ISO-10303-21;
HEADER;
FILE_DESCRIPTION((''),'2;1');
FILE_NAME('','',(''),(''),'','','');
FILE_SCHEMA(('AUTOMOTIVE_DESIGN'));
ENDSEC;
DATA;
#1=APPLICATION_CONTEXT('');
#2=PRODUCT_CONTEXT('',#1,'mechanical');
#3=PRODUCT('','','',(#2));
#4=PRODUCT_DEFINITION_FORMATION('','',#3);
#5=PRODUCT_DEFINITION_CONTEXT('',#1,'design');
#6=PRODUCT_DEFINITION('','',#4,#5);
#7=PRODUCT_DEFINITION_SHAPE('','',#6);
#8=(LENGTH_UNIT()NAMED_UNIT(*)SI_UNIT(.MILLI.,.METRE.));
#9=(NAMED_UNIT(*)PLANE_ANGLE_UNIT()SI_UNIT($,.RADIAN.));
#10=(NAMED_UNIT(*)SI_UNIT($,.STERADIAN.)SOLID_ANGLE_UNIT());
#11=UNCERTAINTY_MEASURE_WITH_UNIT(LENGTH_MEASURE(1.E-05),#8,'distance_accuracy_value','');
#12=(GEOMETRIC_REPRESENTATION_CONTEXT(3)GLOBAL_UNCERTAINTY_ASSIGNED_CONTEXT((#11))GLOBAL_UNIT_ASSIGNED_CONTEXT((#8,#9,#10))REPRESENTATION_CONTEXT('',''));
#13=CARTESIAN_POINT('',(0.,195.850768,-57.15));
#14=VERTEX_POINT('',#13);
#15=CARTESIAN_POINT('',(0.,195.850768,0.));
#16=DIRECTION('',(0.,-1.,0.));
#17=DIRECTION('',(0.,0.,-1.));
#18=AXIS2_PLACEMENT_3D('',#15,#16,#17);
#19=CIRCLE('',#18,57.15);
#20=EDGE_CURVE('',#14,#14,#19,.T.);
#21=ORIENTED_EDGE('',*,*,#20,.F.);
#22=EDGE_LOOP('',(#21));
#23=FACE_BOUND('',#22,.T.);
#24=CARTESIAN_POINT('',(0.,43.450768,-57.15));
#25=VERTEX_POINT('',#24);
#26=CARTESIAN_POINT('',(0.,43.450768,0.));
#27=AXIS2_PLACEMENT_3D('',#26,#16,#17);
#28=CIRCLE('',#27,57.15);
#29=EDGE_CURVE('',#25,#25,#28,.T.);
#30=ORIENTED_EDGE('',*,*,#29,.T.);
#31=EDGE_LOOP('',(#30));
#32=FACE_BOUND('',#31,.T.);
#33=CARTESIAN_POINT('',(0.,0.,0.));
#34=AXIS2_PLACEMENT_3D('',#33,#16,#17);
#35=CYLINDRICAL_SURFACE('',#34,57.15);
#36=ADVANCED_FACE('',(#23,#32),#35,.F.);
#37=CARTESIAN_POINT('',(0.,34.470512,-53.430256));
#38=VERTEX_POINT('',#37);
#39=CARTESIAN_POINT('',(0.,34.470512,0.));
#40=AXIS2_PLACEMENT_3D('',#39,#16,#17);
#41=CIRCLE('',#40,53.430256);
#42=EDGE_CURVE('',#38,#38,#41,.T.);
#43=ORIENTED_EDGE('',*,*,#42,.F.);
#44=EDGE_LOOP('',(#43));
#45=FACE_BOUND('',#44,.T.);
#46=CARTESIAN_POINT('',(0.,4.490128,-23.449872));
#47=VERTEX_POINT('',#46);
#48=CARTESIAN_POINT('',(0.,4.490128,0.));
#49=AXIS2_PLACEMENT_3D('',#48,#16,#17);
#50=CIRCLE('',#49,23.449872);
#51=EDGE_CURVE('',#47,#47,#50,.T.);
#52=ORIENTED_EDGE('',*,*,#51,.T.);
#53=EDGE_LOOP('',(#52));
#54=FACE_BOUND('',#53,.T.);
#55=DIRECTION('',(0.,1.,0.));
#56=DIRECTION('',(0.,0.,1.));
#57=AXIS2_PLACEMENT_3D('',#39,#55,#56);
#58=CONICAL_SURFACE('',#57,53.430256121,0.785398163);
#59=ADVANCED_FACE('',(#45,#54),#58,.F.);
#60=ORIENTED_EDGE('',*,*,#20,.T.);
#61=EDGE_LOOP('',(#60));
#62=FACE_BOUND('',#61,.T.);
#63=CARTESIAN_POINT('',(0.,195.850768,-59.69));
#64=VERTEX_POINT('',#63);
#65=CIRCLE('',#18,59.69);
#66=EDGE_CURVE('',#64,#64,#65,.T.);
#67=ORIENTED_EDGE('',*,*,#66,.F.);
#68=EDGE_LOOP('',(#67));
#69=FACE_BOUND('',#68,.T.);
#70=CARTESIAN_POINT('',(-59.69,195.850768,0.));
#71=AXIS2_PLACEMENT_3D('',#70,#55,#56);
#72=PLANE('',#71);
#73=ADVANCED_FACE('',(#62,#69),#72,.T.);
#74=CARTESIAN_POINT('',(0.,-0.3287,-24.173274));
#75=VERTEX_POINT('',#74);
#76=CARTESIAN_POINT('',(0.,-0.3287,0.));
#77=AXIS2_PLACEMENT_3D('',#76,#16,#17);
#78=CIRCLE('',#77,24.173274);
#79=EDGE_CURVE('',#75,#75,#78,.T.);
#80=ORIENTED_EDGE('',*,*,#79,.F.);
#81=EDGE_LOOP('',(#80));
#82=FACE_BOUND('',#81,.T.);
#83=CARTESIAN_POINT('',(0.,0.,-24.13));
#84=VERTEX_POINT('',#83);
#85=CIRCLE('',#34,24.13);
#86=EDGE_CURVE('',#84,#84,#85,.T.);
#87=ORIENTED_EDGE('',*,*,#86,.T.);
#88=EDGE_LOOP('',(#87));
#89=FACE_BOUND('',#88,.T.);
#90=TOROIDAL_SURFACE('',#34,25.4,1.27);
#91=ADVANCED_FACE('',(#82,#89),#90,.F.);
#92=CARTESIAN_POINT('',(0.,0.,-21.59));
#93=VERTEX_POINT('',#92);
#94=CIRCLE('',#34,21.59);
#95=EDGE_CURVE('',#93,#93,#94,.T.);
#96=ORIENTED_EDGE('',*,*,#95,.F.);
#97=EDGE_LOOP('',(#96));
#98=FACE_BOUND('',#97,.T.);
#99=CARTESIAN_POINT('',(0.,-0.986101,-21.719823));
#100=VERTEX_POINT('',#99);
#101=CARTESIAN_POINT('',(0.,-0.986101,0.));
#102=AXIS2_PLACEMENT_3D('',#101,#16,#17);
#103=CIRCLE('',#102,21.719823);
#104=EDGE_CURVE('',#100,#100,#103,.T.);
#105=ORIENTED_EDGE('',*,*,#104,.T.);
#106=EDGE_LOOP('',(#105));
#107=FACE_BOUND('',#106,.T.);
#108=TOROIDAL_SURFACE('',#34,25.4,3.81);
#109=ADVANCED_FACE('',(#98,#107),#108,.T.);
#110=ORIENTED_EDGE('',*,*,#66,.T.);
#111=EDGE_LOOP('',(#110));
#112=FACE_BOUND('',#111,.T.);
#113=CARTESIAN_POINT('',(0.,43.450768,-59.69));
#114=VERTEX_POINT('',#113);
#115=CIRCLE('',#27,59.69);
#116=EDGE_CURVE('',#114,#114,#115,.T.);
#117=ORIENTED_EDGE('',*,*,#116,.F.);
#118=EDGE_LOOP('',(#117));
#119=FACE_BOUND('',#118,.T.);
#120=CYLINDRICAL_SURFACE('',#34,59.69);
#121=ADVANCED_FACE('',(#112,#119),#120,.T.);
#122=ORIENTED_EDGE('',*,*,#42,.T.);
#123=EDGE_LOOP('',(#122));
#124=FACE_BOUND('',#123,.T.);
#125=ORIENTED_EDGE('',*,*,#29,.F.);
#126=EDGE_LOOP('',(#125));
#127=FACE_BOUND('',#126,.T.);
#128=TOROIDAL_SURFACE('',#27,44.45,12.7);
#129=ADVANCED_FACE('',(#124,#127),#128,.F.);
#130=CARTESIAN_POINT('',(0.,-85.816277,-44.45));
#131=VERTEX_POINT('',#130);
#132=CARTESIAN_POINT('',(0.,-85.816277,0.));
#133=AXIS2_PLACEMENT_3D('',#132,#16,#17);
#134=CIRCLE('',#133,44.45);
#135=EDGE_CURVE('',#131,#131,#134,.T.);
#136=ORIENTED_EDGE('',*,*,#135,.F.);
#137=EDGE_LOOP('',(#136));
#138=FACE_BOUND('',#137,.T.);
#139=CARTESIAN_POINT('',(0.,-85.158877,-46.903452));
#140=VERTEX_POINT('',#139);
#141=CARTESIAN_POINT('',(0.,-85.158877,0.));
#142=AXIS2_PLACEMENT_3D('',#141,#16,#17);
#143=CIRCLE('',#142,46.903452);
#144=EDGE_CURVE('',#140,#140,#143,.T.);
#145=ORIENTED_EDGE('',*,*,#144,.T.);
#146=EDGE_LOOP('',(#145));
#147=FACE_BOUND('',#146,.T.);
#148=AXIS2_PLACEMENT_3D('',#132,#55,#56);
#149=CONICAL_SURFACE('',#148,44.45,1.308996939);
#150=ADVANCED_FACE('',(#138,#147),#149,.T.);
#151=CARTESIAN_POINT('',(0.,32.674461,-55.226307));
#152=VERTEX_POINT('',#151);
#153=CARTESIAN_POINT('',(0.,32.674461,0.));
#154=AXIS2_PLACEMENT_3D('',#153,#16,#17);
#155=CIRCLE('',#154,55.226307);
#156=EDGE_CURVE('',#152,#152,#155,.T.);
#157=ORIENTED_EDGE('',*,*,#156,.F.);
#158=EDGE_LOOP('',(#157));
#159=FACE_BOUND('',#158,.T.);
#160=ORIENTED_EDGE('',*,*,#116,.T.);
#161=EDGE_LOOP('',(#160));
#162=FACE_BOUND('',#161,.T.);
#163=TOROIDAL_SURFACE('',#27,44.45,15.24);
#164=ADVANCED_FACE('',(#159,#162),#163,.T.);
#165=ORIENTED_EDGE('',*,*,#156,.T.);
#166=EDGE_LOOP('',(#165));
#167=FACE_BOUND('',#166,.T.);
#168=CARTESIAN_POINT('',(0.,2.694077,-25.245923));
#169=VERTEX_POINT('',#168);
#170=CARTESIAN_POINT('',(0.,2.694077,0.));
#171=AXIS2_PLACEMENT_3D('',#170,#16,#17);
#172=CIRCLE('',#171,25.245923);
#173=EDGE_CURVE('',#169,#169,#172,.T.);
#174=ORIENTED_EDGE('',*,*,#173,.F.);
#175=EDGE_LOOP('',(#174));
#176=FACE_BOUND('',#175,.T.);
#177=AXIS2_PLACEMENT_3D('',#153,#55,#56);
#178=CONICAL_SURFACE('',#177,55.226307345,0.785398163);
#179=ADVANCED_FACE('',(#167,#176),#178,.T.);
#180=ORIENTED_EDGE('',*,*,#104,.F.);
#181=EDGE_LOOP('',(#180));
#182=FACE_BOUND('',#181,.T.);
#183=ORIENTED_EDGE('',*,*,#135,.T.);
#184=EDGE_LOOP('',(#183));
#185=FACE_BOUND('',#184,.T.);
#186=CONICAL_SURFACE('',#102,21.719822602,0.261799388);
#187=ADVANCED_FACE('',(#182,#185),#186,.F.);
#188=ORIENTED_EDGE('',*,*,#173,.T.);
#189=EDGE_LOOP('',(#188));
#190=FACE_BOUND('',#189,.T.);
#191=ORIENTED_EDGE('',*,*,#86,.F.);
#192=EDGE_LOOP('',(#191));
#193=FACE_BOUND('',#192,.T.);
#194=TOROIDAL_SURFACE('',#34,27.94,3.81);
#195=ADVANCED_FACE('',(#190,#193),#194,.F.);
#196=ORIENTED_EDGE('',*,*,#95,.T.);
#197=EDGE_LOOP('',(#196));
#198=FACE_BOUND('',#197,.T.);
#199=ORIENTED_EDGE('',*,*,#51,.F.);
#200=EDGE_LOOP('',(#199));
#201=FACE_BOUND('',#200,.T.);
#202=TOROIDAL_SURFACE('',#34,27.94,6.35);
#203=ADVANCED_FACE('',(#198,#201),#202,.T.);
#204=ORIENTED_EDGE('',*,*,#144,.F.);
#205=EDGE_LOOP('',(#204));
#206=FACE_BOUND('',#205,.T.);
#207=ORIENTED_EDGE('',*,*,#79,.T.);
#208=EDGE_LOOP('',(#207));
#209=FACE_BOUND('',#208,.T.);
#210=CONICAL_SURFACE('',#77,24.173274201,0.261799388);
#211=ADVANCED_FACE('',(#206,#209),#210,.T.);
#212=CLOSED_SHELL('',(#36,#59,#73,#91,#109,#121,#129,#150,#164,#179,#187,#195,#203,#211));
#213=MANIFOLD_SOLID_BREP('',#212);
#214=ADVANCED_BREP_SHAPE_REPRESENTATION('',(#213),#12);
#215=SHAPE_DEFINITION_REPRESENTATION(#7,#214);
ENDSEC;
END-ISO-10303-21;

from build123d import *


with BuildPart() as part:
    # Sketch1 → Revolve-Thin1 (revolve)
    with BuildSketch(Plane.XY, mode=Mode.PRIVATE) as revolve_thin1_sk:
        with BuildLine():
            Line((-57.15, 195.850768363), (-57.15, 43.450768363))
            ThreePointArc((-57.15, 43.450768363), (-56.183270063, 38.590688772), (-53.430256121, 34.470512242))
            Line((-53.430256121, 34.470512242), (-23.449871939, 4.490128061))
            ThreePointArc((-23.449871939, 4.490128061), (-22.073364969, 2.430039796), (-21.59, 0))
            ThreePointArc((-21.59, 0), (-21.622595078, -0.497304792), (-21.719822602, -0.986100562))
            Line((-21.719822602, -0.986100562), (-44.45, -85.816277477))
            Line((-44.45, -85.816277477), (-46.903451599, -85.158877102))
            Line((-46.903451599, -85.158877102), (-24.173274201, -0.328700187))
            ThreePointArc((-24.173274201, -0.328700187), (-24.140865026, -0.165768264), (-24.13, 0))
            ThreePointArc((-24.13, 0), (-24.420018981, 1.458023877), (-25.245923164, 2.694076836))
            Line((-25.245923164, 2.694076836), (-55.226307345, 32.674461018))
            ThreePointArc((-55.226307345, 32.674461018), (-58.529924075, 37.618672854), (-59.69, 43.450768363))
            Line((-59.69, 43.450768363), (-59.69, 195.850768363))
            Line((-59.69, 195.850768363), (-57.15, 195.850768363))
        make_face()
    revolve(revolve_thin1_sk.sketch.rotate(Axis((0, 0, 0), (0, 1, 0)), 270), axis=Axis((0, 0, 0), (0, 1, 0)))


solid = part.part
